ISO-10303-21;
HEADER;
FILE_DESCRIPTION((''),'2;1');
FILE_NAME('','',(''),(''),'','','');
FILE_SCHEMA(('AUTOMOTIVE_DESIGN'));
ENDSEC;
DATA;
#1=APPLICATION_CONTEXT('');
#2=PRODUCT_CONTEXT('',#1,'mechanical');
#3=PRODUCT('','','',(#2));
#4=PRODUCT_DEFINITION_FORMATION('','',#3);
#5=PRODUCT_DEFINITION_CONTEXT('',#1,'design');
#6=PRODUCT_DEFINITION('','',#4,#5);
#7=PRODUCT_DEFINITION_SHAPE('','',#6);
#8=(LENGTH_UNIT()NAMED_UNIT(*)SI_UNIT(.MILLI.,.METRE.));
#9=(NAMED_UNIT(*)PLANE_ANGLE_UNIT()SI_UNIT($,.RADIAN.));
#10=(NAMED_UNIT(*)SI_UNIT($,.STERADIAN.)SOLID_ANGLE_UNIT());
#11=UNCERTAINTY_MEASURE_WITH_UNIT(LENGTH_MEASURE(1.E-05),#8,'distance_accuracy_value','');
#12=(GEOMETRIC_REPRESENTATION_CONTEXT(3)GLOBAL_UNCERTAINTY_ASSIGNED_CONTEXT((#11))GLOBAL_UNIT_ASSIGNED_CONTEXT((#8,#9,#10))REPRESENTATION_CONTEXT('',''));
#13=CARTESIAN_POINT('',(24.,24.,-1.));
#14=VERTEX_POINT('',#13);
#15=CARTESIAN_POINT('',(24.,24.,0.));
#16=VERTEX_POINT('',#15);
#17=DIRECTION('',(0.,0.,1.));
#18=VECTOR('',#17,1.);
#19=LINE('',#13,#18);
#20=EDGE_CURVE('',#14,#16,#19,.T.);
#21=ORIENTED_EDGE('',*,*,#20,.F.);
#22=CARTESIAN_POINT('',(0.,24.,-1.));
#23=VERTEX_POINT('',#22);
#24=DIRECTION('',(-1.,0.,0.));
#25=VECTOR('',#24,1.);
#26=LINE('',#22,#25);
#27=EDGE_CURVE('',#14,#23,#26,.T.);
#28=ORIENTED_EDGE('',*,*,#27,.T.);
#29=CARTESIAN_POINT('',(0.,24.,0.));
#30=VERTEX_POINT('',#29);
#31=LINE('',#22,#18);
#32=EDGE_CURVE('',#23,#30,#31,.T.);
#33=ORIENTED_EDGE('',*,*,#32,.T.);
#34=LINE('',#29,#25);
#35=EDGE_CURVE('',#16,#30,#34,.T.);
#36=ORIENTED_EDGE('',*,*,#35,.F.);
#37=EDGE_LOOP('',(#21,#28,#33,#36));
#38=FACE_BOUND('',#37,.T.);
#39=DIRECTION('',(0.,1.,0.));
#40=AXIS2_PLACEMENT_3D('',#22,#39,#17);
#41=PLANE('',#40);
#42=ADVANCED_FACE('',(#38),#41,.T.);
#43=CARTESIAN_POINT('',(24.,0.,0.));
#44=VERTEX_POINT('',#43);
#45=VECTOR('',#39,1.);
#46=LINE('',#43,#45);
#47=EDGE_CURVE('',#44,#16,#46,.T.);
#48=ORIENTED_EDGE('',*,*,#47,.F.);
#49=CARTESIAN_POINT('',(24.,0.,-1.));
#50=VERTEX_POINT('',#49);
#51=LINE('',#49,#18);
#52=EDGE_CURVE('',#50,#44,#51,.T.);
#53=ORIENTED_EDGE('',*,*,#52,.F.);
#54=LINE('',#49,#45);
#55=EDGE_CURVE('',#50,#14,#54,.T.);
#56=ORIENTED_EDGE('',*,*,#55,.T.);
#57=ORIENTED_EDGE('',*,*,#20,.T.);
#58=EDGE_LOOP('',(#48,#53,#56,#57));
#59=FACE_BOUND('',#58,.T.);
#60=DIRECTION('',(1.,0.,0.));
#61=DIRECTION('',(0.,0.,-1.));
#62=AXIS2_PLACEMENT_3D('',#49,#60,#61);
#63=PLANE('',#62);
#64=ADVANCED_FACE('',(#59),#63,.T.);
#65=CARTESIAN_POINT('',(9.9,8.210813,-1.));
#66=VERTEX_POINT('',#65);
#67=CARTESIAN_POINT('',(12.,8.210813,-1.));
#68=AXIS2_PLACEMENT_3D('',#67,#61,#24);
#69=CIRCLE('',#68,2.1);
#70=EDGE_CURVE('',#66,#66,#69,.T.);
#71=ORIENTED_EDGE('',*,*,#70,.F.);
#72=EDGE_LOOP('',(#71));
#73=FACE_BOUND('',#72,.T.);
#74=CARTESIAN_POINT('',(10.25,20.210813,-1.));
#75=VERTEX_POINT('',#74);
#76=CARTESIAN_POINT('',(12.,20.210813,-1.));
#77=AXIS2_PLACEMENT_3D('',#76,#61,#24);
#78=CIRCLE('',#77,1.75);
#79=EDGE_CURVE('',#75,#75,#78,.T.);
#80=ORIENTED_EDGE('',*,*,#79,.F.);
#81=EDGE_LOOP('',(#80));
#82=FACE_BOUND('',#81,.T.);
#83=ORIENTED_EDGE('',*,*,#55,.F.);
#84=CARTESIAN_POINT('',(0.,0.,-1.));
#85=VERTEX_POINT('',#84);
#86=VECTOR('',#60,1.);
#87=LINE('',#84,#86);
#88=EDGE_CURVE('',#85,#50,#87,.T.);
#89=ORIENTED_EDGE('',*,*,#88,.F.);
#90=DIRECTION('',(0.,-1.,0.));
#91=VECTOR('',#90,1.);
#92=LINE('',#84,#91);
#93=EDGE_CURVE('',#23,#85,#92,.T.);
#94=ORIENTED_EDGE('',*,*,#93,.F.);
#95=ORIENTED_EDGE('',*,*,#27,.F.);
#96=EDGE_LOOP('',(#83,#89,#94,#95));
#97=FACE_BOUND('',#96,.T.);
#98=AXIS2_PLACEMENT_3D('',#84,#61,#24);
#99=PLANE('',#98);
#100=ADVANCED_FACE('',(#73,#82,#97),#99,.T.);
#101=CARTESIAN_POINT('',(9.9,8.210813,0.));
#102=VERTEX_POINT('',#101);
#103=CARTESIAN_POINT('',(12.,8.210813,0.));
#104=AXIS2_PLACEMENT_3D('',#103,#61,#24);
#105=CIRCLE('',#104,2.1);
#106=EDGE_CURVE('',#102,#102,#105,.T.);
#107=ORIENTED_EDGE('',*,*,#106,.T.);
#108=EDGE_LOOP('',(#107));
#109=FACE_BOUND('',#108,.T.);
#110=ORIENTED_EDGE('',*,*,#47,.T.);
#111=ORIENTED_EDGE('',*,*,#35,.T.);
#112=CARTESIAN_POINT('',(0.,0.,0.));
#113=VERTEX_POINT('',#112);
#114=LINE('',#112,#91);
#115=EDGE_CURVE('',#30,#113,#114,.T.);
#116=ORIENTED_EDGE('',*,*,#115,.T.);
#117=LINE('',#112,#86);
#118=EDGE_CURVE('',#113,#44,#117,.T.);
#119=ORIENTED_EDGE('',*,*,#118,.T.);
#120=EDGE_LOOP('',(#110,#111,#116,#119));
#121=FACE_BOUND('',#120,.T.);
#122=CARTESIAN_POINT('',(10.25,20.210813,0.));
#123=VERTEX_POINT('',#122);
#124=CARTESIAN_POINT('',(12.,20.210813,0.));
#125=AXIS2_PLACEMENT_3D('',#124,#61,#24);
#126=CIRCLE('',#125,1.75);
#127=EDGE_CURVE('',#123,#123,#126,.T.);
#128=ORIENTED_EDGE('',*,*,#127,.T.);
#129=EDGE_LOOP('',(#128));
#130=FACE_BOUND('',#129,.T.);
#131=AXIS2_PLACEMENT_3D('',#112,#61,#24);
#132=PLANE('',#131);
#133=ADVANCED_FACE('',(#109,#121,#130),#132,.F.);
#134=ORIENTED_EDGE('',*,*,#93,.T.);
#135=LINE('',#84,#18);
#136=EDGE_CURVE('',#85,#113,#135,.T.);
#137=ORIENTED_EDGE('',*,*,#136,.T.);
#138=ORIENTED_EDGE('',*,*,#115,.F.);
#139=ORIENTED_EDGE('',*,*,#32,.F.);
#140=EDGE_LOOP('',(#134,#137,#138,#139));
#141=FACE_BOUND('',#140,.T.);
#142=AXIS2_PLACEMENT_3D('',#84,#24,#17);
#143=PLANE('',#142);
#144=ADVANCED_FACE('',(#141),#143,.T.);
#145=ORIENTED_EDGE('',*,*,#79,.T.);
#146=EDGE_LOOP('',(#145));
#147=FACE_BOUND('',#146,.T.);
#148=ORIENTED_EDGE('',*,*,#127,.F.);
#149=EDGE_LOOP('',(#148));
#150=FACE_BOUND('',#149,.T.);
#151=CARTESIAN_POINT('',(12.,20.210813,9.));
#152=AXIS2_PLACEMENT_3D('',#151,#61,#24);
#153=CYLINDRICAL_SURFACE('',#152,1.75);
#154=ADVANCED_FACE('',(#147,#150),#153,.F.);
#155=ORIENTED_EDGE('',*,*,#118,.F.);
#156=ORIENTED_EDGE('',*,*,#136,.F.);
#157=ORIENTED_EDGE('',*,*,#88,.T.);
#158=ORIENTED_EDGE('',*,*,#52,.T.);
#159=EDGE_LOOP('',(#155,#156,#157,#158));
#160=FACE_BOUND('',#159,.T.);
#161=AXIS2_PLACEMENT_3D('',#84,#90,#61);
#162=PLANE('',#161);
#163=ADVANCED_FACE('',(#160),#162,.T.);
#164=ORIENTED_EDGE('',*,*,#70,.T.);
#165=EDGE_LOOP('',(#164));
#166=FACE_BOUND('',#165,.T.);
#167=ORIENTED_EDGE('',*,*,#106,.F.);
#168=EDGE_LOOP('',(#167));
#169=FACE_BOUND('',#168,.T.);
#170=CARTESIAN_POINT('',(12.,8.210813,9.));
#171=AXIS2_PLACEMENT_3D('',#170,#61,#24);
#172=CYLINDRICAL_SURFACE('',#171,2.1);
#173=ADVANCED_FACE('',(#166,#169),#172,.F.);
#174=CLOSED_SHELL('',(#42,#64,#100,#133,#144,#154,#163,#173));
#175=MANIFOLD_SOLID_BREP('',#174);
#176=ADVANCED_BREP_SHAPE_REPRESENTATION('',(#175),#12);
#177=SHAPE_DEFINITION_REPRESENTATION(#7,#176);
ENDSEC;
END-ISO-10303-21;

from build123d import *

# Parameters (mm, degrees)
SKETCH1_W          = 24
SKETCH1_H          = 24
BASE_FLANGE1_DEPTH = 1
SKETCH4_R          = 1.75
SKETCH4_R_2        = 2.1
CUT_EXTRUDE1_DEPTH = 10


# Sheet-metal steps are written as plain solids
with BuildPart() as part:
    # Sketch1 → Base-Flange1 (new body)
    with BuildSketch(Plane.XY):
        with Locations((12, 12)):
            Rectangle(SKETCH1_W, SKETCH1_H)
    extrude(amount=-BASE_FLANGE1_DEPTH)

    # Sketch4 → Cut-Extrude1 (cut)
    with BuildSketch(Plane(origin=(0, 0, -1), x_dir=(-1, 0, 0), z_dir=(0, 0, -1))):
        with Locations((-12, 20.210812599)):
            Circle(SKETCH4_R)
        with Locations((-12, 8.210812599)):
            Circle(SKETCH4_R_2)
    extrude(amount=-CUT_EXTRUDE1_DEPTH, mode=Mode.SUBTRACT)


solid = part.part
